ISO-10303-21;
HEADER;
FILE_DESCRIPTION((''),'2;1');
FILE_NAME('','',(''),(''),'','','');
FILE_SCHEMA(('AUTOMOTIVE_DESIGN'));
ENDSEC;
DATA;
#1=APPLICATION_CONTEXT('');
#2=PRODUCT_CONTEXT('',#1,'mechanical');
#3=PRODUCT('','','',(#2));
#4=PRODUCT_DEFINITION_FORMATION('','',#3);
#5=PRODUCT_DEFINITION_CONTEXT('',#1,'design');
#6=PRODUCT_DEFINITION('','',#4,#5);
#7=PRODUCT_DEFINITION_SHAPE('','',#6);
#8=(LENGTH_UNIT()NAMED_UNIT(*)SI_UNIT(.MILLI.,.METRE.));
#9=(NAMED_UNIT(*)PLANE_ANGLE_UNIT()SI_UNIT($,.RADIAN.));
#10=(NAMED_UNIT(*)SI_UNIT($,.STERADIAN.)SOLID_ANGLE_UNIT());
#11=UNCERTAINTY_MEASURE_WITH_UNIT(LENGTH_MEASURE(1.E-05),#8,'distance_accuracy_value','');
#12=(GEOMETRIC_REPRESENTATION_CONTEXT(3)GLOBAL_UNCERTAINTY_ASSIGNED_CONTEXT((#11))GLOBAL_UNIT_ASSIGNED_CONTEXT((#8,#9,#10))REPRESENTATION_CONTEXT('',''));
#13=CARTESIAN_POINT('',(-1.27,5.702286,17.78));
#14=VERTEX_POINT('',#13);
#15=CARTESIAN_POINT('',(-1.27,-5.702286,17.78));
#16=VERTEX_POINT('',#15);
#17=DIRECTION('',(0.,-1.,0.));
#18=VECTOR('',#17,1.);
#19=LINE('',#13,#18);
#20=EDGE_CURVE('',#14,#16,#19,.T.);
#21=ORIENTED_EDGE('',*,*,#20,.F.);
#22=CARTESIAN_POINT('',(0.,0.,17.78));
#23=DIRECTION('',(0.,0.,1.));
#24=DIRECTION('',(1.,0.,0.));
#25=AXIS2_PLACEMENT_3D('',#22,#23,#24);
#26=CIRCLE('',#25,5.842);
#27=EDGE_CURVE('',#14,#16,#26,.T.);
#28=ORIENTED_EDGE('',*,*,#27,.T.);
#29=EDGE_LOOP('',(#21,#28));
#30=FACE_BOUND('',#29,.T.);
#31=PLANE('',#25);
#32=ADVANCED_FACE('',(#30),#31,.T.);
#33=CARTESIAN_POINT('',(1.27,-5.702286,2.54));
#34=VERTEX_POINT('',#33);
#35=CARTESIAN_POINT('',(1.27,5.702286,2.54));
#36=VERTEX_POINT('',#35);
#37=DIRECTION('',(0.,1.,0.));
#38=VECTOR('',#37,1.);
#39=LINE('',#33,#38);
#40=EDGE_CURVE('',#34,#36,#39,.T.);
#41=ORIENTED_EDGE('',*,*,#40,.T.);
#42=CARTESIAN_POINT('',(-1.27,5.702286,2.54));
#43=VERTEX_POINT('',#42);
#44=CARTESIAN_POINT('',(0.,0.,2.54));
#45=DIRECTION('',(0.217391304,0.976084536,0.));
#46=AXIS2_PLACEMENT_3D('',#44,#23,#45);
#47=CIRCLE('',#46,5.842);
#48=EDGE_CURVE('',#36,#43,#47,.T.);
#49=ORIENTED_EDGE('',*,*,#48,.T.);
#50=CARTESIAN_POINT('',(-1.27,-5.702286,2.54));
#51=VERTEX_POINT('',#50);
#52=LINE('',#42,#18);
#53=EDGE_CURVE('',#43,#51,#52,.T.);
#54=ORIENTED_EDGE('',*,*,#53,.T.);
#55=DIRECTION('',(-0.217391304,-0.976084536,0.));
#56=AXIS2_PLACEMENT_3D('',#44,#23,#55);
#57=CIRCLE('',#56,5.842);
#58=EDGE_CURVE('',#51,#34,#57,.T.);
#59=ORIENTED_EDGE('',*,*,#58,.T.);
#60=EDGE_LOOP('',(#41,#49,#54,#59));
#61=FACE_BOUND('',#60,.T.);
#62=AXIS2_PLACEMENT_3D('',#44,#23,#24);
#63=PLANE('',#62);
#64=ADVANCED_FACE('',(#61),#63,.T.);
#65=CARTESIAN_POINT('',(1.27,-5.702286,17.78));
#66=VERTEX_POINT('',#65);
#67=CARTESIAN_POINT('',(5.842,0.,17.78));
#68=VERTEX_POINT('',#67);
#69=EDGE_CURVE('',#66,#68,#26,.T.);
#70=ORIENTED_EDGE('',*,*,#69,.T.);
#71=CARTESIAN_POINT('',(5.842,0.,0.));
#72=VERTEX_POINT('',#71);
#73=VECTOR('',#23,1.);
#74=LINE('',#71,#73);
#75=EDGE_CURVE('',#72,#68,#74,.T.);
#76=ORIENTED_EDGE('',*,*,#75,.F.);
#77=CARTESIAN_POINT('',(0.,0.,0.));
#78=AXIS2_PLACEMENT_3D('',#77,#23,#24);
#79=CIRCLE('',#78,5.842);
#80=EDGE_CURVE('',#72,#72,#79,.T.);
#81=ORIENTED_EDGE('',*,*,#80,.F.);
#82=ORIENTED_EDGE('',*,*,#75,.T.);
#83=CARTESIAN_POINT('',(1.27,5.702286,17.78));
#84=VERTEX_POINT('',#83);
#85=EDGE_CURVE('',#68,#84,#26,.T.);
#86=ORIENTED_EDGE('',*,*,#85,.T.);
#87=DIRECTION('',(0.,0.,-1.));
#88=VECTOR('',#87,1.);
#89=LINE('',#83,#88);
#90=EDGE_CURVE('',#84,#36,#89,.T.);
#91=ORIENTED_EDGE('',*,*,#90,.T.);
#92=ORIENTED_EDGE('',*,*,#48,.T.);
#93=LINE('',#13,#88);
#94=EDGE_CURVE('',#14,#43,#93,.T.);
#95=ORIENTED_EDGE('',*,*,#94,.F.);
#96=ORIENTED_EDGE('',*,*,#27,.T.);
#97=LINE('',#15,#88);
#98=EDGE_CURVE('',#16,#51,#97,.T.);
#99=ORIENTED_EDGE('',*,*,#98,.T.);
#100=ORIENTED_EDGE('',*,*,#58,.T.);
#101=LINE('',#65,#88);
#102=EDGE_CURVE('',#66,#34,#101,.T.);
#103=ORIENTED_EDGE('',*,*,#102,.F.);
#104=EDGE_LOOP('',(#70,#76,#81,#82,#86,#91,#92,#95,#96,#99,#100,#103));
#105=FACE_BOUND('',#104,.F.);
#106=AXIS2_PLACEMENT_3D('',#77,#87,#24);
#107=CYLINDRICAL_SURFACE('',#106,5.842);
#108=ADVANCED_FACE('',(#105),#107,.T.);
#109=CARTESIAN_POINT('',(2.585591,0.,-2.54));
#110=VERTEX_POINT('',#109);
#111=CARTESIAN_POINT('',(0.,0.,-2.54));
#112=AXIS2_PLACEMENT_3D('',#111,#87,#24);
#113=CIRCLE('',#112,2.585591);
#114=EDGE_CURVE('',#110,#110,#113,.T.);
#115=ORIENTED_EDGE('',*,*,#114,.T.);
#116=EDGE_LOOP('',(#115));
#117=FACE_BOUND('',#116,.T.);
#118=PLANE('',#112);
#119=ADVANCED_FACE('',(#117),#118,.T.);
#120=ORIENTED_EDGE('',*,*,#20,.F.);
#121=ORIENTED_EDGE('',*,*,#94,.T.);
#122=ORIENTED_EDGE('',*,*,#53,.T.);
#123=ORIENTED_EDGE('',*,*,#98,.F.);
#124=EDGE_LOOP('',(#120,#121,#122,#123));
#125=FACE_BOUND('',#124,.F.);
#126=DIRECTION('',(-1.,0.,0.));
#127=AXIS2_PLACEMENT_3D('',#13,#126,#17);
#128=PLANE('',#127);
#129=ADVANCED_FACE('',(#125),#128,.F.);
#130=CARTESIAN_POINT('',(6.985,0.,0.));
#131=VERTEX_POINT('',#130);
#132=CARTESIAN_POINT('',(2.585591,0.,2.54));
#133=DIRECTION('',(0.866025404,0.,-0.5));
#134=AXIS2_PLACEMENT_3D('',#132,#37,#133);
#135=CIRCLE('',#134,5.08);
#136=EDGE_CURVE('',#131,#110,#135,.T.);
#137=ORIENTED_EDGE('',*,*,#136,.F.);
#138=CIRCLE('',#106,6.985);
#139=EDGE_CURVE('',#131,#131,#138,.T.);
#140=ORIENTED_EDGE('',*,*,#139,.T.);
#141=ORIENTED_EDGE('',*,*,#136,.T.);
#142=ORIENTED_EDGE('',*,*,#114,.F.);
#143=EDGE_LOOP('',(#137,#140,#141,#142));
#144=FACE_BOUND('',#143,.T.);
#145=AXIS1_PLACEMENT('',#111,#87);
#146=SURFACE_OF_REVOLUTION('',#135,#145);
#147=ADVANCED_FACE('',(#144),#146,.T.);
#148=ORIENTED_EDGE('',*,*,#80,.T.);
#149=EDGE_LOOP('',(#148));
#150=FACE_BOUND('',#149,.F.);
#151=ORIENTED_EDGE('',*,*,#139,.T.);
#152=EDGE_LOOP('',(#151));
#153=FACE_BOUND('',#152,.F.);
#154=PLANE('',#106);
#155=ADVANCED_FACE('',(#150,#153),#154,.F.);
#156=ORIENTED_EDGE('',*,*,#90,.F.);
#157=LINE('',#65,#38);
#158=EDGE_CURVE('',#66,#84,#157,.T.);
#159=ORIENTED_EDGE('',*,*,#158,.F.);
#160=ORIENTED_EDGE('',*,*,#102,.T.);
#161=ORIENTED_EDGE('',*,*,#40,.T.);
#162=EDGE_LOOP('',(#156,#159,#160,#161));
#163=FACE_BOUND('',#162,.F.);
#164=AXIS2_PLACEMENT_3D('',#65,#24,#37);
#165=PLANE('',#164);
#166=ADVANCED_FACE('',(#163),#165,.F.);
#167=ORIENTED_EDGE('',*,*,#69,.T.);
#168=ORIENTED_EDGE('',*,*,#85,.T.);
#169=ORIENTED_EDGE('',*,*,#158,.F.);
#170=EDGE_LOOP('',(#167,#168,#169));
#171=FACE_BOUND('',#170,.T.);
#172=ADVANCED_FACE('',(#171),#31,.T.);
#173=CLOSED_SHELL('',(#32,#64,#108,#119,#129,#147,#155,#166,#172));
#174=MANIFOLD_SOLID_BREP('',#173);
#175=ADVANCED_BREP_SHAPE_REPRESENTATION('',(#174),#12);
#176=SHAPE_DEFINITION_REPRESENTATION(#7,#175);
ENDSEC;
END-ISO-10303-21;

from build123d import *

# Parameters (mm, degrees)
F0_R     = 5.842
F1_DEPTH = 17.78
F3_DEPTH = 15.24
F4_R     = 6.985
F4_R_2   = 5.842
F5_DEPTH = 2.54


# Not quite as in the source:
# - a fillet or chamfer that OpenCascade refuses, or shapes differently, is made with other operations: its cross-section is extruded or revolved along the edge and cut away or added


with BuildPart() as f1:
    # F0 (on Top) → F1 (new body)
    with BuildSketch(Plane.XY):
        Circle(F0_R)
    extrude(amount=F1_DEPTH)

    # F2 (on face) → F3 (cut)
    with BuildSketch(Plane.XY.offset(17.78)):
        with BuildLine():
            Line((1.27, -5.7022858574), (1.27, 5.7022858574))
            ThreePointArc((1.27, 5.7022858574), (0, 5.842), (-1.27, 5.7022858574))
            Line((-1.27, 5.7022858574), (-1.27, -5.7022858574))
            ThreePointArc((-1.27, -5.7022858574), (0, -5.842), (1.27, -5.7022858574))
        make_face()
    extrude(amount=-F3_DEPTH, mode=Mode.SUBTRACT)

    # F4 (on face) → F5 (join)
    with BuildSketch(Plane(origin=(0, 0, 0), x_dir=(1, 0, 0), z_dir=(0, 0, -1))):
        Circle(F4_R)
        Circle(F4_R_2, mode=Mode.SUBTRACT)
        Circle(F4_R_2)
    extrude(amount=F5_DEPTH)

    # F6: fillet of radius 5.08 on 1 edges, made by hand

    # F6_s1 → F6_t2 (revolve, cut)
    with BuildSketch(Plane.XZ):
        with BuildLine():
            ThreePointArc((6.985, 0), (5.1255909488, -1.8594090512), (2.5855909488, -2.54))
            Line((2.5855909488, -2.54), (6.985, -2.54))
            Line((6.985, -2.54), (6.985, 0))
        make_face()
    revolve(axis=Axis((0, 0, -2.54), (0, 0, -1)), mode=Mode.SUBTRACT)


solid = f1.part
